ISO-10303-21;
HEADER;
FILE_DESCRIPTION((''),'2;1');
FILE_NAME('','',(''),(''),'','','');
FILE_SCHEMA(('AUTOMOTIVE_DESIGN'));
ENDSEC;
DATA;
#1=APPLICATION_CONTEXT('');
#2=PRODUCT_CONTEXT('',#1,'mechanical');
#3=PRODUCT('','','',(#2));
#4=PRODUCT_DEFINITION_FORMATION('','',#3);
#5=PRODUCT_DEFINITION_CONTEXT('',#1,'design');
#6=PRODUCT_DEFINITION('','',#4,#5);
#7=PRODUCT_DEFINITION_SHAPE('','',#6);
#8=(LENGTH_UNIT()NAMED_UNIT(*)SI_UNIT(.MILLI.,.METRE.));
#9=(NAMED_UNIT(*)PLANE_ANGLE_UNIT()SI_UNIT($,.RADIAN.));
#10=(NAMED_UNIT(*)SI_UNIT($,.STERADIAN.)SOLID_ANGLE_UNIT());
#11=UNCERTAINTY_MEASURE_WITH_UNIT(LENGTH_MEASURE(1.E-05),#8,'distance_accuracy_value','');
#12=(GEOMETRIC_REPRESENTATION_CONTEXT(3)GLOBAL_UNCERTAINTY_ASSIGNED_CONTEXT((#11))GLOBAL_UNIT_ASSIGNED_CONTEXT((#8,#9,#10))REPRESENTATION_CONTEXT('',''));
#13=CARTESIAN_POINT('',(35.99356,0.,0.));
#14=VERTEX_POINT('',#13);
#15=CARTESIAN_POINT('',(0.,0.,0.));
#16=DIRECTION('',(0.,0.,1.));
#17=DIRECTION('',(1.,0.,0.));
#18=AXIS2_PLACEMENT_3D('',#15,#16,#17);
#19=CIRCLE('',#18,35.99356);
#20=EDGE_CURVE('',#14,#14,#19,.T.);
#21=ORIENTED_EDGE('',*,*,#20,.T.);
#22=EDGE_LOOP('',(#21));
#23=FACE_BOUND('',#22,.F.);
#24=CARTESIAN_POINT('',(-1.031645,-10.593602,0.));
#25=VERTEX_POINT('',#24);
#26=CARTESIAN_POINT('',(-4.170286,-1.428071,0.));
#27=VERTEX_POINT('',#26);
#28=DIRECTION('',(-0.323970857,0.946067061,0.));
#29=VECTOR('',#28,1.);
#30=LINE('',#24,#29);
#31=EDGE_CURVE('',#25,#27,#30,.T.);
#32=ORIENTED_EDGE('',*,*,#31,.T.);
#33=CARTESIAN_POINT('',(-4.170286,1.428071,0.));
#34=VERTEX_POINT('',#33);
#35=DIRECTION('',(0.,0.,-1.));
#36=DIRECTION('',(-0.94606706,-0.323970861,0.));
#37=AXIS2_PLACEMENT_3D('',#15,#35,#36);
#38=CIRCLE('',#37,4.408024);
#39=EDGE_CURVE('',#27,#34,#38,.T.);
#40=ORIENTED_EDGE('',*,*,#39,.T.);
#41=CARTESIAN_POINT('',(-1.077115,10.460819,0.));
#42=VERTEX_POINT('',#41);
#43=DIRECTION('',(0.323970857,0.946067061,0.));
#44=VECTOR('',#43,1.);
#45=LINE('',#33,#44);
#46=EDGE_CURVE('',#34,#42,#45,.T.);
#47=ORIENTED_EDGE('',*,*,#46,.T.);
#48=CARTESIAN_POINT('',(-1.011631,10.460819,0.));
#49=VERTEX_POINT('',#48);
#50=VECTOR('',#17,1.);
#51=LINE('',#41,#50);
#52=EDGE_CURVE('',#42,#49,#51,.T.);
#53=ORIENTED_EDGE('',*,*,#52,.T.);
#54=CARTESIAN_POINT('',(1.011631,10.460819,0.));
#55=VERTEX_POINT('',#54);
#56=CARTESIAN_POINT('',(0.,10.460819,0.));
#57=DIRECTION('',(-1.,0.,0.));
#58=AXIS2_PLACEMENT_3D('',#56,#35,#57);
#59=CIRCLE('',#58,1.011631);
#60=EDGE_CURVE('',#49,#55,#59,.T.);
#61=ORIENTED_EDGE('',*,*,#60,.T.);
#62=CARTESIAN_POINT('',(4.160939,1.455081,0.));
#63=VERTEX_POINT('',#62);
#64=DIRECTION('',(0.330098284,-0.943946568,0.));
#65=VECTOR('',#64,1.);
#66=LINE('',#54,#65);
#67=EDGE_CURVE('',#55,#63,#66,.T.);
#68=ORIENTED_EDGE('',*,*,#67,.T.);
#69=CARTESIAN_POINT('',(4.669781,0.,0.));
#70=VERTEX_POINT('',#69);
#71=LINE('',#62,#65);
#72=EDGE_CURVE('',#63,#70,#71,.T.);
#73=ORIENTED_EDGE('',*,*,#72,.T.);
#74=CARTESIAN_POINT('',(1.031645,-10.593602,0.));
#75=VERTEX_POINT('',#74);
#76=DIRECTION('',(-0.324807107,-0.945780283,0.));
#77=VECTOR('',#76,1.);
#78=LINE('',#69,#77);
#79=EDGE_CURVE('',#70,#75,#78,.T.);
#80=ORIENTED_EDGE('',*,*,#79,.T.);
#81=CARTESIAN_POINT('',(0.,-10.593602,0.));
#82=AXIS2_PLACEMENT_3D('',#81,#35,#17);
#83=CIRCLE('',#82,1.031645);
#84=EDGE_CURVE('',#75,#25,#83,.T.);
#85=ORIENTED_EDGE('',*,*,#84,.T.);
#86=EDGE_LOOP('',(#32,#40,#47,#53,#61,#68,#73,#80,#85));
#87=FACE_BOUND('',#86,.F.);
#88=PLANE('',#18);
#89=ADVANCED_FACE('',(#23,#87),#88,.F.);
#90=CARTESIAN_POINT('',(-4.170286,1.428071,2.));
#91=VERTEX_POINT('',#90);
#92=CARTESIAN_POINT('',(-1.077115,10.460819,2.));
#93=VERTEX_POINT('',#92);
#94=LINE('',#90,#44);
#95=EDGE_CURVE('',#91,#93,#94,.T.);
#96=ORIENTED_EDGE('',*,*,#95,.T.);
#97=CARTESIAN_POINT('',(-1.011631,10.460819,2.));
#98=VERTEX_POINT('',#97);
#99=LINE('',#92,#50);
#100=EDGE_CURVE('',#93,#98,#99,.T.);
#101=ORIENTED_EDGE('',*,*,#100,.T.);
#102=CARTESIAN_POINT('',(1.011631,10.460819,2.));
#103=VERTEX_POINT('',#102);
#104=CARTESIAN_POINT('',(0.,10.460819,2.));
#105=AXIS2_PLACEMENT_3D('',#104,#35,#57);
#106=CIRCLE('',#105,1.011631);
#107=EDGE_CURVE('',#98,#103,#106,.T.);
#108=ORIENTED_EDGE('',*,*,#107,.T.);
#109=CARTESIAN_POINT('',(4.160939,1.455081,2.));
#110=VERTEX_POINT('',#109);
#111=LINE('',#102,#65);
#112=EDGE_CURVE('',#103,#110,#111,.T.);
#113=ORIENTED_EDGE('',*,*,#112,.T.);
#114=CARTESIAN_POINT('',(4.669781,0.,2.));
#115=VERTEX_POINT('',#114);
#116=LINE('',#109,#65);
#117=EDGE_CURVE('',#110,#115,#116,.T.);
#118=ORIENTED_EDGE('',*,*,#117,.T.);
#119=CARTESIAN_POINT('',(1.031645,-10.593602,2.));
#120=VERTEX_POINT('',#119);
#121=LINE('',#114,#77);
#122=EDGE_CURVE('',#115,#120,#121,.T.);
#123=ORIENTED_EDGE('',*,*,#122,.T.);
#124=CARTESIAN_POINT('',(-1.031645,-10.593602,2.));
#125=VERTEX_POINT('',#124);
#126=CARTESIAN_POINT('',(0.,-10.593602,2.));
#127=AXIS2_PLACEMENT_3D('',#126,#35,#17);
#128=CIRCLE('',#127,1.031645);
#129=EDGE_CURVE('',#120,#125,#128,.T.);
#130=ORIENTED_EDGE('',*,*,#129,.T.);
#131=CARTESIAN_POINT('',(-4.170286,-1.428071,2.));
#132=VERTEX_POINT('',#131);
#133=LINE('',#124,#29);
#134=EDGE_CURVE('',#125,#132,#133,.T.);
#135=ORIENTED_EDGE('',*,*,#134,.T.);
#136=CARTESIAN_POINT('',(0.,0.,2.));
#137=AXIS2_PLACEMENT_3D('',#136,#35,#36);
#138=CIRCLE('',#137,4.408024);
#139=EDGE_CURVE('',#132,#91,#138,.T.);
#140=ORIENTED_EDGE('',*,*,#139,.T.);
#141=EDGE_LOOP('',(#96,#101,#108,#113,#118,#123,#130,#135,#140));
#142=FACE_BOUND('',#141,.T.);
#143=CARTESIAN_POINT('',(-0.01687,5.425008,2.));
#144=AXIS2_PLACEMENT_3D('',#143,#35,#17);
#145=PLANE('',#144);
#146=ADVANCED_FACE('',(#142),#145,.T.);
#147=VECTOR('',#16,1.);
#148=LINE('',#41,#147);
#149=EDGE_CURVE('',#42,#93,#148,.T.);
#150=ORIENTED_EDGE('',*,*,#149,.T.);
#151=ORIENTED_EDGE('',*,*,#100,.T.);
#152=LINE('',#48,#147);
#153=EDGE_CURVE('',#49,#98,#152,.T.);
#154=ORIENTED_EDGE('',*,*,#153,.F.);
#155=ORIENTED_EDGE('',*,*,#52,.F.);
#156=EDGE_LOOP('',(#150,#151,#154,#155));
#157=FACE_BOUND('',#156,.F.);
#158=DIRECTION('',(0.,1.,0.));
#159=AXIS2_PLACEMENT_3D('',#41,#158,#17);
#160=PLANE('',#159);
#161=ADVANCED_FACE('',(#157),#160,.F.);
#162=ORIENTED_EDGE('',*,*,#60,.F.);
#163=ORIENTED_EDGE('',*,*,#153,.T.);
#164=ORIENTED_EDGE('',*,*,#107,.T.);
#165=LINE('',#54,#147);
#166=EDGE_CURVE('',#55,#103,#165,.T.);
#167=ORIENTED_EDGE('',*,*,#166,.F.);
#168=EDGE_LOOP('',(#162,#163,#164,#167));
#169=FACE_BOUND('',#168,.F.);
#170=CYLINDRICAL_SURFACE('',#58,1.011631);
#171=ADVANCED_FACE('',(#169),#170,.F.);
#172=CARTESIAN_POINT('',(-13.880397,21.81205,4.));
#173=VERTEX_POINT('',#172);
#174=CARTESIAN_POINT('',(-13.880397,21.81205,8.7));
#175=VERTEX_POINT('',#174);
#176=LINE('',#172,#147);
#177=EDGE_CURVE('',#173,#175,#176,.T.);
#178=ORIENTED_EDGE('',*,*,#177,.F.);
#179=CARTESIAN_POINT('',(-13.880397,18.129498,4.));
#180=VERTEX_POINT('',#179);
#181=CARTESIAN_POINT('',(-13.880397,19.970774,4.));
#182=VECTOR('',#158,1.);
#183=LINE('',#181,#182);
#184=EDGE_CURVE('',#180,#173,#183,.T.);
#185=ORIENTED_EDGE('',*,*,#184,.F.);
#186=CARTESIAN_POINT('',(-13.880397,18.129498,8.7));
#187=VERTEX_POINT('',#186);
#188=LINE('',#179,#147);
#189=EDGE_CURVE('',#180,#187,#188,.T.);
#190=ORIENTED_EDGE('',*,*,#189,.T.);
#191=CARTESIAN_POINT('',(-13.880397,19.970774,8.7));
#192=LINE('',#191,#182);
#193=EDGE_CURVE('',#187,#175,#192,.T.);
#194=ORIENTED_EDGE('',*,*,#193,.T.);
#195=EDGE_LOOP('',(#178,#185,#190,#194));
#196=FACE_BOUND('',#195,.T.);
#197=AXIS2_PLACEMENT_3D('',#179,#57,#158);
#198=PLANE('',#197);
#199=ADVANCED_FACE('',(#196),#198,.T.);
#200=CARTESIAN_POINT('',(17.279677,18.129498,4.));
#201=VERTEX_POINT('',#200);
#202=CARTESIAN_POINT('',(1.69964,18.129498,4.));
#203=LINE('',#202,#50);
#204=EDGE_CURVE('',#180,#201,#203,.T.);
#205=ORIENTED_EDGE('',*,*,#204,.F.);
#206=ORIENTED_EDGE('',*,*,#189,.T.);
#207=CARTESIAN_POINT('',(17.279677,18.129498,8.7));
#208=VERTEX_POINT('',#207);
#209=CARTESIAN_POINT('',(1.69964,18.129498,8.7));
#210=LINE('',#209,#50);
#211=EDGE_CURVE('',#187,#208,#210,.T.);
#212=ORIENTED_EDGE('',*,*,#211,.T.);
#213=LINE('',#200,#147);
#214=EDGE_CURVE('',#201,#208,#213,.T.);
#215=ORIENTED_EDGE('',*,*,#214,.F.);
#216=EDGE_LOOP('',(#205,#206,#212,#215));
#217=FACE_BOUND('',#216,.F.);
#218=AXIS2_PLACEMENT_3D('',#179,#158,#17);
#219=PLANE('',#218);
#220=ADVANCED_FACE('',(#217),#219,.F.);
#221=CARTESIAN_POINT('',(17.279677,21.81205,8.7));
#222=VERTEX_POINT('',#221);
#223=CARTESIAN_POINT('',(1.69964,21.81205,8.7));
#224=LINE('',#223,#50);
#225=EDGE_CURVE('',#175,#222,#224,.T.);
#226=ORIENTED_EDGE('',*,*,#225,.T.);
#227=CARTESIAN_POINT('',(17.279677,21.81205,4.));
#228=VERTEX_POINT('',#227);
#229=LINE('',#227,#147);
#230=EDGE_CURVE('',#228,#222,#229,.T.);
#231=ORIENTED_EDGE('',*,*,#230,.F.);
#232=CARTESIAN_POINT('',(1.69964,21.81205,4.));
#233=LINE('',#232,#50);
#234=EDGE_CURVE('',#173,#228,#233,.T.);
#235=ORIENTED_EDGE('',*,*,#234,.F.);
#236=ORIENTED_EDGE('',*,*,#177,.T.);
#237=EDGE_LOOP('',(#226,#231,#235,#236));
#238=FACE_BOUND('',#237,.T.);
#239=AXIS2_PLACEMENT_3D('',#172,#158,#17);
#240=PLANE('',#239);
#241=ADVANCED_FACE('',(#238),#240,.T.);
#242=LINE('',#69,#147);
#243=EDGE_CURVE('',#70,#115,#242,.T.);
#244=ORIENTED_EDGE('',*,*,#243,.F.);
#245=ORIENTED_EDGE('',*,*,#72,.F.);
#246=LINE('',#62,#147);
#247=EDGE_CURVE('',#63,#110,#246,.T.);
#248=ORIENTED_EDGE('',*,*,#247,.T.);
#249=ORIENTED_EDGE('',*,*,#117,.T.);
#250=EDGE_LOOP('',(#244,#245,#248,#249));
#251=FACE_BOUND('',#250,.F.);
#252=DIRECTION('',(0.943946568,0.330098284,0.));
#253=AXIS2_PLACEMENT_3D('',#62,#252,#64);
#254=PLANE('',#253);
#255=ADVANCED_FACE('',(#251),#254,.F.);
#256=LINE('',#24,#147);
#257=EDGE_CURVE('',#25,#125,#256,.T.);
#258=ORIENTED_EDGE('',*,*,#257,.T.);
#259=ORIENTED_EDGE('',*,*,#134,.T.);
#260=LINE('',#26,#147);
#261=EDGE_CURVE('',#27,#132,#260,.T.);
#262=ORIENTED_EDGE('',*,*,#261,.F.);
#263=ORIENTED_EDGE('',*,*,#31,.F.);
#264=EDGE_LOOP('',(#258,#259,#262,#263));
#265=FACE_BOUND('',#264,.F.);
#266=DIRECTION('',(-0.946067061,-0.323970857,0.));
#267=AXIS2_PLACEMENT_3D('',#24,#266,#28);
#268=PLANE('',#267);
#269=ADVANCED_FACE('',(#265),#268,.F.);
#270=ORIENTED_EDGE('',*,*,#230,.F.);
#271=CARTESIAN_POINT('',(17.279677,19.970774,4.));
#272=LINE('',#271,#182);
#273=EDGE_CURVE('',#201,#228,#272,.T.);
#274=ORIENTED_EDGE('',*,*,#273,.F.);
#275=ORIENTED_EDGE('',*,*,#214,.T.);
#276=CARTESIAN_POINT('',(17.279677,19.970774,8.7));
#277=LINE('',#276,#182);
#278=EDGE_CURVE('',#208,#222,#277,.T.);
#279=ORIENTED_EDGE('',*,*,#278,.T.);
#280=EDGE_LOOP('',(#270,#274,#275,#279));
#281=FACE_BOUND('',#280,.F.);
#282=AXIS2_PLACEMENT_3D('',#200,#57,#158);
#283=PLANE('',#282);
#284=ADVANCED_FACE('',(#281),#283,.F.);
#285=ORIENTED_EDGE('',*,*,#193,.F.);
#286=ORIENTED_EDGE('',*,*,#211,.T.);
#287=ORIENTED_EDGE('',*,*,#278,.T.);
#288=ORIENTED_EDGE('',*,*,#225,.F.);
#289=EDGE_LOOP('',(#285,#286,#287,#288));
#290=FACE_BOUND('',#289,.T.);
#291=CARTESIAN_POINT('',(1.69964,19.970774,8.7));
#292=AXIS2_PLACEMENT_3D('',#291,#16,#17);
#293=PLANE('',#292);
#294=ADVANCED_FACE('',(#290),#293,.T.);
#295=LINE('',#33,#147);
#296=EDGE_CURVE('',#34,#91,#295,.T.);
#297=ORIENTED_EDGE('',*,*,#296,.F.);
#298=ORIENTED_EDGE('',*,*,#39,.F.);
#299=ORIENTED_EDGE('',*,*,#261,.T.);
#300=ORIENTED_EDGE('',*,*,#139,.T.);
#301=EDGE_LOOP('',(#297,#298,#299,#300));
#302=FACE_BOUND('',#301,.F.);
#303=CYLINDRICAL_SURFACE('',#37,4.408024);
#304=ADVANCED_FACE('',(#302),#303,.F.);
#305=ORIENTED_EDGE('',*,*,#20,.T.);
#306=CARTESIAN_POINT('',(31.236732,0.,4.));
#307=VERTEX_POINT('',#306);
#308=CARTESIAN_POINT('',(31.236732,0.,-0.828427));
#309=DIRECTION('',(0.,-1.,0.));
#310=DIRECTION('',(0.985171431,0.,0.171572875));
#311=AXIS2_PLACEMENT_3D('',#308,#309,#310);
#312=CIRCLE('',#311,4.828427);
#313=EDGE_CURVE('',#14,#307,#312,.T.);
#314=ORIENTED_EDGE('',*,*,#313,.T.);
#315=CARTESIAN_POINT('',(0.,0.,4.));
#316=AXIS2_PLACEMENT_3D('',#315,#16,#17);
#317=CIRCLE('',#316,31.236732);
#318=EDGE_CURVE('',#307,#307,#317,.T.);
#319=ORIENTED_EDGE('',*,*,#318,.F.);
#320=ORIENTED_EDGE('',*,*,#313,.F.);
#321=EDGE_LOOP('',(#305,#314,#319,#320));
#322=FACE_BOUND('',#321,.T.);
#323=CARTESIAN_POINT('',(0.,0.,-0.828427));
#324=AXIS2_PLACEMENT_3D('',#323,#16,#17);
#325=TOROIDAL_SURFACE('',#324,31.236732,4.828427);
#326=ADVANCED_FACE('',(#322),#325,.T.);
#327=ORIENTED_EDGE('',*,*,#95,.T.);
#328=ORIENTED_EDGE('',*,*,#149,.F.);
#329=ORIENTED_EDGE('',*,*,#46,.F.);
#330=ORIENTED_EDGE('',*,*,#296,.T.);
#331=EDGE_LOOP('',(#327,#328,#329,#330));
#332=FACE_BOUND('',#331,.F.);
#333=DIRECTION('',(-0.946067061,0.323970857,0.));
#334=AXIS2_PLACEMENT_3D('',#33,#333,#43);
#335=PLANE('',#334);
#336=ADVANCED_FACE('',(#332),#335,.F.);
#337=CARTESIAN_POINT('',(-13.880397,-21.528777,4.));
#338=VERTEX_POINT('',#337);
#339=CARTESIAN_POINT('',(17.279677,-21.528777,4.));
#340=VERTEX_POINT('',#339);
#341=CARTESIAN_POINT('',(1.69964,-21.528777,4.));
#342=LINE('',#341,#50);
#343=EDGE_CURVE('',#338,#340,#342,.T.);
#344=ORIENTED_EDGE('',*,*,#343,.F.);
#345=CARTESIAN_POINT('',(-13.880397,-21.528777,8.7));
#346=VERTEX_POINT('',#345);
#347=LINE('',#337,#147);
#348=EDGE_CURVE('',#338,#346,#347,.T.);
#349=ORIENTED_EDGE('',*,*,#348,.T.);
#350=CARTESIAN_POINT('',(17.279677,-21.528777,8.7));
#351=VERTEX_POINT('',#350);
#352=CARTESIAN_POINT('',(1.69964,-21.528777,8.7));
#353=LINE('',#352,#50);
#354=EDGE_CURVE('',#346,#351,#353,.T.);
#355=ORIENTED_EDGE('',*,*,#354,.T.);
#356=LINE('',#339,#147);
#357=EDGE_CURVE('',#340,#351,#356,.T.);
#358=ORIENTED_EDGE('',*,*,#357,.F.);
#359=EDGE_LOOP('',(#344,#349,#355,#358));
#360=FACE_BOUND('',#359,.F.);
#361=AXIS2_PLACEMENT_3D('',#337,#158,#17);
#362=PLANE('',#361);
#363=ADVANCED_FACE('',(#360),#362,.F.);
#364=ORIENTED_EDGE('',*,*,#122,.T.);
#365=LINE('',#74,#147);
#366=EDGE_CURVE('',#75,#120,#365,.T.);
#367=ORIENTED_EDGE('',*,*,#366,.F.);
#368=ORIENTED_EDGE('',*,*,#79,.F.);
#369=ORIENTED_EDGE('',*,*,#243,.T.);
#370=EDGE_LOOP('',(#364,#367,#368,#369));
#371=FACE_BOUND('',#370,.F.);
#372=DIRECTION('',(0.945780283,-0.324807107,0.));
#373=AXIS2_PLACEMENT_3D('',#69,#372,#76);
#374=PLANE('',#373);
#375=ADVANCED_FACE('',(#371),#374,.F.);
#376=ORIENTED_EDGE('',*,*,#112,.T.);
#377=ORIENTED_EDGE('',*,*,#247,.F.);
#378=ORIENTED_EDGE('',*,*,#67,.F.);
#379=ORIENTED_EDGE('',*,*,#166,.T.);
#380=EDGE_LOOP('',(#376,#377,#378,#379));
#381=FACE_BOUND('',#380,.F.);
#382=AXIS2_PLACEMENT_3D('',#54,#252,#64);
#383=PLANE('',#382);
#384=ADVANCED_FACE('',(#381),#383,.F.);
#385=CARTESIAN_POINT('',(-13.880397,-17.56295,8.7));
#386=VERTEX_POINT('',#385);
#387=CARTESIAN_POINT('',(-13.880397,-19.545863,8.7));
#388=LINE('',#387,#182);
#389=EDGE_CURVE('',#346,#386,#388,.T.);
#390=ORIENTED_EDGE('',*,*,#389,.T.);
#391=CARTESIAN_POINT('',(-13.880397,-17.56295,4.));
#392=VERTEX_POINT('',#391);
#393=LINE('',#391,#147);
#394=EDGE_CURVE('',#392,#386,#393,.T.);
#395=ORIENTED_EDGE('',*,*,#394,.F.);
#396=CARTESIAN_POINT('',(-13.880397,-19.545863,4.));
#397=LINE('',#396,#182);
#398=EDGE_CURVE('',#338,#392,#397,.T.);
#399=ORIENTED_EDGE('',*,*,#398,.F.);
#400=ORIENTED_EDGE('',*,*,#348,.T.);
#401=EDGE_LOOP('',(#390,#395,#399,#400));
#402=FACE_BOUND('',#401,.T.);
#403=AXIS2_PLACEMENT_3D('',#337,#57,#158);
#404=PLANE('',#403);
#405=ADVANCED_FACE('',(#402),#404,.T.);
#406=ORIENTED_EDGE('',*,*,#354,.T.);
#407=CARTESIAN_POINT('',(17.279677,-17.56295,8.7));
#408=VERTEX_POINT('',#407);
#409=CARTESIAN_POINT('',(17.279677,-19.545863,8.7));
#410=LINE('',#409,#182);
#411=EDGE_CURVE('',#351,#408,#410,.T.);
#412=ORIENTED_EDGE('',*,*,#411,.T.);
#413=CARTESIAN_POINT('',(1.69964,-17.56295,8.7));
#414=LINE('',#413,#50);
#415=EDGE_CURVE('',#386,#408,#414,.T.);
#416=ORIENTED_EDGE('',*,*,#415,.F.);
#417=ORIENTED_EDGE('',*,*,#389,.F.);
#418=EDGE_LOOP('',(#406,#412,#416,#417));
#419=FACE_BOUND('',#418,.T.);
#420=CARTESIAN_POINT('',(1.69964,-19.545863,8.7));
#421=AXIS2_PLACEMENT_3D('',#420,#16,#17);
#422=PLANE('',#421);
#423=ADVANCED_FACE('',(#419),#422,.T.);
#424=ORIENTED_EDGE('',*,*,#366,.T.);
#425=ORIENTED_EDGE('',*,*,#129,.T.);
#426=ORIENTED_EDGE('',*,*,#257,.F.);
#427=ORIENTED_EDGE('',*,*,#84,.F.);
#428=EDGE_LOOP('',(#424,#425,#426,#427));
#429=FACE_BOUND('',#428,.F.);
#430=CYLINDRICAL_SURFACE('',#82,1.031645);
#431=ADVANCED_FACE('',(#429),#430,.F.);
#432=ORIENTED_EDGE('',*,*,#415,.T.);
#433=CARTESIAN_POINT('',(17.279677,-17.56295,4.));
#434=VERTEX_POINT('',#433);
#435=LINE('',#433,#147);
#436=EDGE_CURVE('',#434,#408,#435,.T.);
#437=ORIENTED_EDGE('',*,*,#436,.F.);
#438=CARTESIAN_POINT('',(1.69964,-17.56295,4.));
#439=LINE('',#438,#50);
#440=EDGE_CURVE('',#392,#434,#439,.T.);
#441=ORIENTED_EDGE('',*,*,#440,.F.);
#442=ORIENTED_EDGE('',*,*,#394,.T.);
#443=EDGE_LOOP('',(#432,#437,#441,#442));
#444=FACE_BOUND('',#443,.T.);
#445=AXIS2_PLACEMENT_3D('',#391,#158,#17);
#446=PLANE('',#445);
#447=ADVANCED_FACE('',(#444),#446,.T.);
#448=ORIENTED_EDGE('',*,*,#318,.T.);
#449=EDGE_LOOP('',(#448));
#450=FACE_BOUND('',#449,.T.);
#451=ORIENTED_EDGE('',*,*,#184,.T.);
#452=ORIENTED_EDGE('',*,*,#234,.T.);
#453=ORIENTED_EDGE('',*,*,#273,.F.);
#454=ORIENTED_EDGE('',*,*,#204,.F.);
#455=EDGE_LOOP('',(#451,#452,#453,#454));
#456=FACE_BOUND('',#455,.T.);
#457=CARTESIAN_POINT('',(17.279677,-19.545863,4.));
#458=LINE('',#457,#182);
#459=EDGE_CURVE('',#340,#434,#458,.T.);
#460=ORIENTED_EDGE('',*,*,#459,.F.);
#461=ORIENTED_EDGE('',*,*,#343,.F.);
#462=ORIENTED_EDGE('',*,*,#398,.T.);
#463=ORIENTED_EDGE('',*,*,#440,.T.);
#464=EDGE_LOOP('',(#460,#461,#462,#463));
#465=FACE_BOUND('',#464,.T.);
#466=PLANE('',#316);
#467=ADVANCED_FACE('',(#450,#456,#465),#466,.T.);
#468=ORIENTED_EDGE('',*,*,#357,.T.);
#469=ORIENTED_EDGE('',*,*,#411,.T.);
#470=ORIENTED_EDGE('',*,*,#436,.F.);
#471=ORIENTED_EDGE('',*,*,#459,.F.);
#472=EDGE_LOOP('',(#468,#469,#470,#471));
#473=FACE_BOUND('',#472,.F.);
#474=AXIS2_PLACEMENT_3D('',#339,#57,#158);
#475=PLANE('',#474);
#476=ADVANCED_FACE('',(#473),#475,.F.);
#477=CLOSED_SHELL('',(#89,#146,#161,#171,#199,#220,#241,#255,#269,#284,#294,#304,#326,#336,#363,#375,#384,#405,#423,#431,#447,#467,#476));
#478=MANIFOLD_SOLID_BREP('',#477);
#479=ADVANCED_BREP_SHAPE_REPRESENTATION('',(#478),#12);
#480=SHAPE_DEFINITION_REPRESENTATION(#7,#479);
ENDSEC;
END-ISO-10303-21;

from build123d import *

# Parameters (mm, degrees)
F0_R     = 35.9935602645
F1_DEPTH = 4
F3_W     = 31.1600742862
F3_H     = 3.6825519055
F3_H_2   = 3.9658267051
F4_DEPTH = 4.7
F6_DEPTH = 2


# Not quite as in the source:
# - a fillet or chamfer that OpenCascade refuses, or shapes differently, is made with other operations: its cross-section is extruded or revolved along the edge and cut away or added


with BuildPart() as f1:
    # F0 (on Top) → F1 (new body)
    with BuildSketch(Plane.XY):
        Circle(F0_R)
    extrude(amount=F1_DEPTH)

    # F2: fillet of radius 4.8284271247 on 1 edges, made by hand

    # F2_s1 → F2_t2 (revolve, cut)
    with BuildSketch(Plane.XZ):
        with BuildLine():
            ThreePointArc((35.9935602645, 0), (34.3442797526, 2.8670910053), (31.2367318045, 4))
            Line((31.2367318045, 4), (35.9935602645, 4))
            Line((35.9935602645, 4), (35.9935602645, 0))
        make_face()
    revolve(axis=Axis((0, 0, 4), (0, 0, 1)), mode=Mode.SUBTRACT)

    # F3 (on face) → F4 (join)
    with BuildSketch(Plane.XY.offset(4)):
        with Locations((1.6996399499, 19.9707737193)):
            Rectangle(F3_W, F3_H)
        with Locations((1.6996399499, -19.5458633825)):
            Rectangle(F3_W, F3_H_2)
    extrude(amount=F4_DEPTH)

    # F5 (on face) → F6 (cut)
    with BuildSketch(Plane(origin=(0, 0, 0), x_dir=(1, 0, 0), z_dir=(0, 0, -1))):
        with BuildLine():
            Line((1.0116308873, -10.4608191177), (4.1609390889, -1.4550810977))
            ThreePointArc((4.1609390889, -1.4550810977), (-0.0142907136, -4.4080007801), (-4.1702862527, -1.4280713123))
            Line((-4.1702862527, -1.4280713123), (-1.0771154127, -10.4608191177))
            Line((-1.0771154127, -10.4608191177), (-1.0116308873, -10.4608191177))
            ThreePointArc((-1.0116308873, -10.4608191177), (0, -9.4491882305), (1.0116308873, -10.4608191177))
        make_face()
        with BuildLine():
            ThreePointArc((-1.0116308873, -10.4608191177), (0, -11.472450005), (1.0116308873, -10.4608191177))
            Line((1.0116308873, -10.4608191177), (0, -10.4608191177))
            Line((0, -10.4608191177), (-1.0116308873, -10.4608191177))
        make_face()
        with BuildLine():
            Line((0, -10.4608191177), (1.0116308873, -10.4608191177))
            ThreePointArc((1.0116308873, -10.4608191177), (0, -9.4491882305), (-1.0116308873, -10.4608191177))
            Line((-1.0116308873, -10.4608191177), (0, -10.4608191177))
        make_face()
        with BuildLine():
            ThreePointArc((4.1609390889, -1.4550810977), (4.3458137466, -0.7379552708), (4.4080239453, 0))
            ThreePointArc((4.4080239453, 0), (0.7238623632, 4.3481833426), (-4.1702862527, 1.4280713123))
            ThreePointArc((-4.1702862527, 1.4280713123), (-4.4080239453, 0), (-4.1702862527, -1.4280713123))
            ThreePointArc((-4.1702862527, -1.4280713123), (-0.0142907136, -4.4080007801), (4.1609390889, -1.4550810977))
        make_face()
        with BuildLine():
            ThreePointArc((-4.1702862527, 1.4280713123), (0.7238623632, 4.3481833426), (4.4080239453, 0))
            ThreePointArc((4.4080239453, 0), (4.3458137466, -0.7379552708), (4.1609390889, -1.4550810977))
            Line((4.1609390889, -1.4550810977), (4.6697812098, 0))
            Line((4.6697812098, 0), (1.0316451427, 10.5936024338))
            ThreePointArc((1.0316451427, 10.5936024338), (0, 9.5619572911), (-1.0316451427, 10.5936024338))
            Line((-1.0316451427, 10.5936024338), (-4.1702862527, 1.4280713123))
        make_face()
        with BuildLine():
            ThreePointArc((1.0316451427, 10.5936024338), (0, 11.6252475765), (-1.0316451427, 10.5936024338))
            Line((-1.0316451427, 10.5936024338), (0, 10.5936024338))
            Line((0, 10.5936024338), (1.0316451427, 10.5936024338))
        make_face()
        with BuildLine():
            Line((0, 10.5936024338), (-1.0316451427, 10.5936024338))
            ThreePointArc((-1.0316451427, 10.5936024338), (0, 9.5619572911), (1.0316451427, 10.5936024338))
            Line((1.0316451427, 10.5936024338), (0, 10.5936024338))
        make_face()
    extrude(amount=-F6_DEPTH, mode=Mode.SUBTRACT)


solid = f1.part
